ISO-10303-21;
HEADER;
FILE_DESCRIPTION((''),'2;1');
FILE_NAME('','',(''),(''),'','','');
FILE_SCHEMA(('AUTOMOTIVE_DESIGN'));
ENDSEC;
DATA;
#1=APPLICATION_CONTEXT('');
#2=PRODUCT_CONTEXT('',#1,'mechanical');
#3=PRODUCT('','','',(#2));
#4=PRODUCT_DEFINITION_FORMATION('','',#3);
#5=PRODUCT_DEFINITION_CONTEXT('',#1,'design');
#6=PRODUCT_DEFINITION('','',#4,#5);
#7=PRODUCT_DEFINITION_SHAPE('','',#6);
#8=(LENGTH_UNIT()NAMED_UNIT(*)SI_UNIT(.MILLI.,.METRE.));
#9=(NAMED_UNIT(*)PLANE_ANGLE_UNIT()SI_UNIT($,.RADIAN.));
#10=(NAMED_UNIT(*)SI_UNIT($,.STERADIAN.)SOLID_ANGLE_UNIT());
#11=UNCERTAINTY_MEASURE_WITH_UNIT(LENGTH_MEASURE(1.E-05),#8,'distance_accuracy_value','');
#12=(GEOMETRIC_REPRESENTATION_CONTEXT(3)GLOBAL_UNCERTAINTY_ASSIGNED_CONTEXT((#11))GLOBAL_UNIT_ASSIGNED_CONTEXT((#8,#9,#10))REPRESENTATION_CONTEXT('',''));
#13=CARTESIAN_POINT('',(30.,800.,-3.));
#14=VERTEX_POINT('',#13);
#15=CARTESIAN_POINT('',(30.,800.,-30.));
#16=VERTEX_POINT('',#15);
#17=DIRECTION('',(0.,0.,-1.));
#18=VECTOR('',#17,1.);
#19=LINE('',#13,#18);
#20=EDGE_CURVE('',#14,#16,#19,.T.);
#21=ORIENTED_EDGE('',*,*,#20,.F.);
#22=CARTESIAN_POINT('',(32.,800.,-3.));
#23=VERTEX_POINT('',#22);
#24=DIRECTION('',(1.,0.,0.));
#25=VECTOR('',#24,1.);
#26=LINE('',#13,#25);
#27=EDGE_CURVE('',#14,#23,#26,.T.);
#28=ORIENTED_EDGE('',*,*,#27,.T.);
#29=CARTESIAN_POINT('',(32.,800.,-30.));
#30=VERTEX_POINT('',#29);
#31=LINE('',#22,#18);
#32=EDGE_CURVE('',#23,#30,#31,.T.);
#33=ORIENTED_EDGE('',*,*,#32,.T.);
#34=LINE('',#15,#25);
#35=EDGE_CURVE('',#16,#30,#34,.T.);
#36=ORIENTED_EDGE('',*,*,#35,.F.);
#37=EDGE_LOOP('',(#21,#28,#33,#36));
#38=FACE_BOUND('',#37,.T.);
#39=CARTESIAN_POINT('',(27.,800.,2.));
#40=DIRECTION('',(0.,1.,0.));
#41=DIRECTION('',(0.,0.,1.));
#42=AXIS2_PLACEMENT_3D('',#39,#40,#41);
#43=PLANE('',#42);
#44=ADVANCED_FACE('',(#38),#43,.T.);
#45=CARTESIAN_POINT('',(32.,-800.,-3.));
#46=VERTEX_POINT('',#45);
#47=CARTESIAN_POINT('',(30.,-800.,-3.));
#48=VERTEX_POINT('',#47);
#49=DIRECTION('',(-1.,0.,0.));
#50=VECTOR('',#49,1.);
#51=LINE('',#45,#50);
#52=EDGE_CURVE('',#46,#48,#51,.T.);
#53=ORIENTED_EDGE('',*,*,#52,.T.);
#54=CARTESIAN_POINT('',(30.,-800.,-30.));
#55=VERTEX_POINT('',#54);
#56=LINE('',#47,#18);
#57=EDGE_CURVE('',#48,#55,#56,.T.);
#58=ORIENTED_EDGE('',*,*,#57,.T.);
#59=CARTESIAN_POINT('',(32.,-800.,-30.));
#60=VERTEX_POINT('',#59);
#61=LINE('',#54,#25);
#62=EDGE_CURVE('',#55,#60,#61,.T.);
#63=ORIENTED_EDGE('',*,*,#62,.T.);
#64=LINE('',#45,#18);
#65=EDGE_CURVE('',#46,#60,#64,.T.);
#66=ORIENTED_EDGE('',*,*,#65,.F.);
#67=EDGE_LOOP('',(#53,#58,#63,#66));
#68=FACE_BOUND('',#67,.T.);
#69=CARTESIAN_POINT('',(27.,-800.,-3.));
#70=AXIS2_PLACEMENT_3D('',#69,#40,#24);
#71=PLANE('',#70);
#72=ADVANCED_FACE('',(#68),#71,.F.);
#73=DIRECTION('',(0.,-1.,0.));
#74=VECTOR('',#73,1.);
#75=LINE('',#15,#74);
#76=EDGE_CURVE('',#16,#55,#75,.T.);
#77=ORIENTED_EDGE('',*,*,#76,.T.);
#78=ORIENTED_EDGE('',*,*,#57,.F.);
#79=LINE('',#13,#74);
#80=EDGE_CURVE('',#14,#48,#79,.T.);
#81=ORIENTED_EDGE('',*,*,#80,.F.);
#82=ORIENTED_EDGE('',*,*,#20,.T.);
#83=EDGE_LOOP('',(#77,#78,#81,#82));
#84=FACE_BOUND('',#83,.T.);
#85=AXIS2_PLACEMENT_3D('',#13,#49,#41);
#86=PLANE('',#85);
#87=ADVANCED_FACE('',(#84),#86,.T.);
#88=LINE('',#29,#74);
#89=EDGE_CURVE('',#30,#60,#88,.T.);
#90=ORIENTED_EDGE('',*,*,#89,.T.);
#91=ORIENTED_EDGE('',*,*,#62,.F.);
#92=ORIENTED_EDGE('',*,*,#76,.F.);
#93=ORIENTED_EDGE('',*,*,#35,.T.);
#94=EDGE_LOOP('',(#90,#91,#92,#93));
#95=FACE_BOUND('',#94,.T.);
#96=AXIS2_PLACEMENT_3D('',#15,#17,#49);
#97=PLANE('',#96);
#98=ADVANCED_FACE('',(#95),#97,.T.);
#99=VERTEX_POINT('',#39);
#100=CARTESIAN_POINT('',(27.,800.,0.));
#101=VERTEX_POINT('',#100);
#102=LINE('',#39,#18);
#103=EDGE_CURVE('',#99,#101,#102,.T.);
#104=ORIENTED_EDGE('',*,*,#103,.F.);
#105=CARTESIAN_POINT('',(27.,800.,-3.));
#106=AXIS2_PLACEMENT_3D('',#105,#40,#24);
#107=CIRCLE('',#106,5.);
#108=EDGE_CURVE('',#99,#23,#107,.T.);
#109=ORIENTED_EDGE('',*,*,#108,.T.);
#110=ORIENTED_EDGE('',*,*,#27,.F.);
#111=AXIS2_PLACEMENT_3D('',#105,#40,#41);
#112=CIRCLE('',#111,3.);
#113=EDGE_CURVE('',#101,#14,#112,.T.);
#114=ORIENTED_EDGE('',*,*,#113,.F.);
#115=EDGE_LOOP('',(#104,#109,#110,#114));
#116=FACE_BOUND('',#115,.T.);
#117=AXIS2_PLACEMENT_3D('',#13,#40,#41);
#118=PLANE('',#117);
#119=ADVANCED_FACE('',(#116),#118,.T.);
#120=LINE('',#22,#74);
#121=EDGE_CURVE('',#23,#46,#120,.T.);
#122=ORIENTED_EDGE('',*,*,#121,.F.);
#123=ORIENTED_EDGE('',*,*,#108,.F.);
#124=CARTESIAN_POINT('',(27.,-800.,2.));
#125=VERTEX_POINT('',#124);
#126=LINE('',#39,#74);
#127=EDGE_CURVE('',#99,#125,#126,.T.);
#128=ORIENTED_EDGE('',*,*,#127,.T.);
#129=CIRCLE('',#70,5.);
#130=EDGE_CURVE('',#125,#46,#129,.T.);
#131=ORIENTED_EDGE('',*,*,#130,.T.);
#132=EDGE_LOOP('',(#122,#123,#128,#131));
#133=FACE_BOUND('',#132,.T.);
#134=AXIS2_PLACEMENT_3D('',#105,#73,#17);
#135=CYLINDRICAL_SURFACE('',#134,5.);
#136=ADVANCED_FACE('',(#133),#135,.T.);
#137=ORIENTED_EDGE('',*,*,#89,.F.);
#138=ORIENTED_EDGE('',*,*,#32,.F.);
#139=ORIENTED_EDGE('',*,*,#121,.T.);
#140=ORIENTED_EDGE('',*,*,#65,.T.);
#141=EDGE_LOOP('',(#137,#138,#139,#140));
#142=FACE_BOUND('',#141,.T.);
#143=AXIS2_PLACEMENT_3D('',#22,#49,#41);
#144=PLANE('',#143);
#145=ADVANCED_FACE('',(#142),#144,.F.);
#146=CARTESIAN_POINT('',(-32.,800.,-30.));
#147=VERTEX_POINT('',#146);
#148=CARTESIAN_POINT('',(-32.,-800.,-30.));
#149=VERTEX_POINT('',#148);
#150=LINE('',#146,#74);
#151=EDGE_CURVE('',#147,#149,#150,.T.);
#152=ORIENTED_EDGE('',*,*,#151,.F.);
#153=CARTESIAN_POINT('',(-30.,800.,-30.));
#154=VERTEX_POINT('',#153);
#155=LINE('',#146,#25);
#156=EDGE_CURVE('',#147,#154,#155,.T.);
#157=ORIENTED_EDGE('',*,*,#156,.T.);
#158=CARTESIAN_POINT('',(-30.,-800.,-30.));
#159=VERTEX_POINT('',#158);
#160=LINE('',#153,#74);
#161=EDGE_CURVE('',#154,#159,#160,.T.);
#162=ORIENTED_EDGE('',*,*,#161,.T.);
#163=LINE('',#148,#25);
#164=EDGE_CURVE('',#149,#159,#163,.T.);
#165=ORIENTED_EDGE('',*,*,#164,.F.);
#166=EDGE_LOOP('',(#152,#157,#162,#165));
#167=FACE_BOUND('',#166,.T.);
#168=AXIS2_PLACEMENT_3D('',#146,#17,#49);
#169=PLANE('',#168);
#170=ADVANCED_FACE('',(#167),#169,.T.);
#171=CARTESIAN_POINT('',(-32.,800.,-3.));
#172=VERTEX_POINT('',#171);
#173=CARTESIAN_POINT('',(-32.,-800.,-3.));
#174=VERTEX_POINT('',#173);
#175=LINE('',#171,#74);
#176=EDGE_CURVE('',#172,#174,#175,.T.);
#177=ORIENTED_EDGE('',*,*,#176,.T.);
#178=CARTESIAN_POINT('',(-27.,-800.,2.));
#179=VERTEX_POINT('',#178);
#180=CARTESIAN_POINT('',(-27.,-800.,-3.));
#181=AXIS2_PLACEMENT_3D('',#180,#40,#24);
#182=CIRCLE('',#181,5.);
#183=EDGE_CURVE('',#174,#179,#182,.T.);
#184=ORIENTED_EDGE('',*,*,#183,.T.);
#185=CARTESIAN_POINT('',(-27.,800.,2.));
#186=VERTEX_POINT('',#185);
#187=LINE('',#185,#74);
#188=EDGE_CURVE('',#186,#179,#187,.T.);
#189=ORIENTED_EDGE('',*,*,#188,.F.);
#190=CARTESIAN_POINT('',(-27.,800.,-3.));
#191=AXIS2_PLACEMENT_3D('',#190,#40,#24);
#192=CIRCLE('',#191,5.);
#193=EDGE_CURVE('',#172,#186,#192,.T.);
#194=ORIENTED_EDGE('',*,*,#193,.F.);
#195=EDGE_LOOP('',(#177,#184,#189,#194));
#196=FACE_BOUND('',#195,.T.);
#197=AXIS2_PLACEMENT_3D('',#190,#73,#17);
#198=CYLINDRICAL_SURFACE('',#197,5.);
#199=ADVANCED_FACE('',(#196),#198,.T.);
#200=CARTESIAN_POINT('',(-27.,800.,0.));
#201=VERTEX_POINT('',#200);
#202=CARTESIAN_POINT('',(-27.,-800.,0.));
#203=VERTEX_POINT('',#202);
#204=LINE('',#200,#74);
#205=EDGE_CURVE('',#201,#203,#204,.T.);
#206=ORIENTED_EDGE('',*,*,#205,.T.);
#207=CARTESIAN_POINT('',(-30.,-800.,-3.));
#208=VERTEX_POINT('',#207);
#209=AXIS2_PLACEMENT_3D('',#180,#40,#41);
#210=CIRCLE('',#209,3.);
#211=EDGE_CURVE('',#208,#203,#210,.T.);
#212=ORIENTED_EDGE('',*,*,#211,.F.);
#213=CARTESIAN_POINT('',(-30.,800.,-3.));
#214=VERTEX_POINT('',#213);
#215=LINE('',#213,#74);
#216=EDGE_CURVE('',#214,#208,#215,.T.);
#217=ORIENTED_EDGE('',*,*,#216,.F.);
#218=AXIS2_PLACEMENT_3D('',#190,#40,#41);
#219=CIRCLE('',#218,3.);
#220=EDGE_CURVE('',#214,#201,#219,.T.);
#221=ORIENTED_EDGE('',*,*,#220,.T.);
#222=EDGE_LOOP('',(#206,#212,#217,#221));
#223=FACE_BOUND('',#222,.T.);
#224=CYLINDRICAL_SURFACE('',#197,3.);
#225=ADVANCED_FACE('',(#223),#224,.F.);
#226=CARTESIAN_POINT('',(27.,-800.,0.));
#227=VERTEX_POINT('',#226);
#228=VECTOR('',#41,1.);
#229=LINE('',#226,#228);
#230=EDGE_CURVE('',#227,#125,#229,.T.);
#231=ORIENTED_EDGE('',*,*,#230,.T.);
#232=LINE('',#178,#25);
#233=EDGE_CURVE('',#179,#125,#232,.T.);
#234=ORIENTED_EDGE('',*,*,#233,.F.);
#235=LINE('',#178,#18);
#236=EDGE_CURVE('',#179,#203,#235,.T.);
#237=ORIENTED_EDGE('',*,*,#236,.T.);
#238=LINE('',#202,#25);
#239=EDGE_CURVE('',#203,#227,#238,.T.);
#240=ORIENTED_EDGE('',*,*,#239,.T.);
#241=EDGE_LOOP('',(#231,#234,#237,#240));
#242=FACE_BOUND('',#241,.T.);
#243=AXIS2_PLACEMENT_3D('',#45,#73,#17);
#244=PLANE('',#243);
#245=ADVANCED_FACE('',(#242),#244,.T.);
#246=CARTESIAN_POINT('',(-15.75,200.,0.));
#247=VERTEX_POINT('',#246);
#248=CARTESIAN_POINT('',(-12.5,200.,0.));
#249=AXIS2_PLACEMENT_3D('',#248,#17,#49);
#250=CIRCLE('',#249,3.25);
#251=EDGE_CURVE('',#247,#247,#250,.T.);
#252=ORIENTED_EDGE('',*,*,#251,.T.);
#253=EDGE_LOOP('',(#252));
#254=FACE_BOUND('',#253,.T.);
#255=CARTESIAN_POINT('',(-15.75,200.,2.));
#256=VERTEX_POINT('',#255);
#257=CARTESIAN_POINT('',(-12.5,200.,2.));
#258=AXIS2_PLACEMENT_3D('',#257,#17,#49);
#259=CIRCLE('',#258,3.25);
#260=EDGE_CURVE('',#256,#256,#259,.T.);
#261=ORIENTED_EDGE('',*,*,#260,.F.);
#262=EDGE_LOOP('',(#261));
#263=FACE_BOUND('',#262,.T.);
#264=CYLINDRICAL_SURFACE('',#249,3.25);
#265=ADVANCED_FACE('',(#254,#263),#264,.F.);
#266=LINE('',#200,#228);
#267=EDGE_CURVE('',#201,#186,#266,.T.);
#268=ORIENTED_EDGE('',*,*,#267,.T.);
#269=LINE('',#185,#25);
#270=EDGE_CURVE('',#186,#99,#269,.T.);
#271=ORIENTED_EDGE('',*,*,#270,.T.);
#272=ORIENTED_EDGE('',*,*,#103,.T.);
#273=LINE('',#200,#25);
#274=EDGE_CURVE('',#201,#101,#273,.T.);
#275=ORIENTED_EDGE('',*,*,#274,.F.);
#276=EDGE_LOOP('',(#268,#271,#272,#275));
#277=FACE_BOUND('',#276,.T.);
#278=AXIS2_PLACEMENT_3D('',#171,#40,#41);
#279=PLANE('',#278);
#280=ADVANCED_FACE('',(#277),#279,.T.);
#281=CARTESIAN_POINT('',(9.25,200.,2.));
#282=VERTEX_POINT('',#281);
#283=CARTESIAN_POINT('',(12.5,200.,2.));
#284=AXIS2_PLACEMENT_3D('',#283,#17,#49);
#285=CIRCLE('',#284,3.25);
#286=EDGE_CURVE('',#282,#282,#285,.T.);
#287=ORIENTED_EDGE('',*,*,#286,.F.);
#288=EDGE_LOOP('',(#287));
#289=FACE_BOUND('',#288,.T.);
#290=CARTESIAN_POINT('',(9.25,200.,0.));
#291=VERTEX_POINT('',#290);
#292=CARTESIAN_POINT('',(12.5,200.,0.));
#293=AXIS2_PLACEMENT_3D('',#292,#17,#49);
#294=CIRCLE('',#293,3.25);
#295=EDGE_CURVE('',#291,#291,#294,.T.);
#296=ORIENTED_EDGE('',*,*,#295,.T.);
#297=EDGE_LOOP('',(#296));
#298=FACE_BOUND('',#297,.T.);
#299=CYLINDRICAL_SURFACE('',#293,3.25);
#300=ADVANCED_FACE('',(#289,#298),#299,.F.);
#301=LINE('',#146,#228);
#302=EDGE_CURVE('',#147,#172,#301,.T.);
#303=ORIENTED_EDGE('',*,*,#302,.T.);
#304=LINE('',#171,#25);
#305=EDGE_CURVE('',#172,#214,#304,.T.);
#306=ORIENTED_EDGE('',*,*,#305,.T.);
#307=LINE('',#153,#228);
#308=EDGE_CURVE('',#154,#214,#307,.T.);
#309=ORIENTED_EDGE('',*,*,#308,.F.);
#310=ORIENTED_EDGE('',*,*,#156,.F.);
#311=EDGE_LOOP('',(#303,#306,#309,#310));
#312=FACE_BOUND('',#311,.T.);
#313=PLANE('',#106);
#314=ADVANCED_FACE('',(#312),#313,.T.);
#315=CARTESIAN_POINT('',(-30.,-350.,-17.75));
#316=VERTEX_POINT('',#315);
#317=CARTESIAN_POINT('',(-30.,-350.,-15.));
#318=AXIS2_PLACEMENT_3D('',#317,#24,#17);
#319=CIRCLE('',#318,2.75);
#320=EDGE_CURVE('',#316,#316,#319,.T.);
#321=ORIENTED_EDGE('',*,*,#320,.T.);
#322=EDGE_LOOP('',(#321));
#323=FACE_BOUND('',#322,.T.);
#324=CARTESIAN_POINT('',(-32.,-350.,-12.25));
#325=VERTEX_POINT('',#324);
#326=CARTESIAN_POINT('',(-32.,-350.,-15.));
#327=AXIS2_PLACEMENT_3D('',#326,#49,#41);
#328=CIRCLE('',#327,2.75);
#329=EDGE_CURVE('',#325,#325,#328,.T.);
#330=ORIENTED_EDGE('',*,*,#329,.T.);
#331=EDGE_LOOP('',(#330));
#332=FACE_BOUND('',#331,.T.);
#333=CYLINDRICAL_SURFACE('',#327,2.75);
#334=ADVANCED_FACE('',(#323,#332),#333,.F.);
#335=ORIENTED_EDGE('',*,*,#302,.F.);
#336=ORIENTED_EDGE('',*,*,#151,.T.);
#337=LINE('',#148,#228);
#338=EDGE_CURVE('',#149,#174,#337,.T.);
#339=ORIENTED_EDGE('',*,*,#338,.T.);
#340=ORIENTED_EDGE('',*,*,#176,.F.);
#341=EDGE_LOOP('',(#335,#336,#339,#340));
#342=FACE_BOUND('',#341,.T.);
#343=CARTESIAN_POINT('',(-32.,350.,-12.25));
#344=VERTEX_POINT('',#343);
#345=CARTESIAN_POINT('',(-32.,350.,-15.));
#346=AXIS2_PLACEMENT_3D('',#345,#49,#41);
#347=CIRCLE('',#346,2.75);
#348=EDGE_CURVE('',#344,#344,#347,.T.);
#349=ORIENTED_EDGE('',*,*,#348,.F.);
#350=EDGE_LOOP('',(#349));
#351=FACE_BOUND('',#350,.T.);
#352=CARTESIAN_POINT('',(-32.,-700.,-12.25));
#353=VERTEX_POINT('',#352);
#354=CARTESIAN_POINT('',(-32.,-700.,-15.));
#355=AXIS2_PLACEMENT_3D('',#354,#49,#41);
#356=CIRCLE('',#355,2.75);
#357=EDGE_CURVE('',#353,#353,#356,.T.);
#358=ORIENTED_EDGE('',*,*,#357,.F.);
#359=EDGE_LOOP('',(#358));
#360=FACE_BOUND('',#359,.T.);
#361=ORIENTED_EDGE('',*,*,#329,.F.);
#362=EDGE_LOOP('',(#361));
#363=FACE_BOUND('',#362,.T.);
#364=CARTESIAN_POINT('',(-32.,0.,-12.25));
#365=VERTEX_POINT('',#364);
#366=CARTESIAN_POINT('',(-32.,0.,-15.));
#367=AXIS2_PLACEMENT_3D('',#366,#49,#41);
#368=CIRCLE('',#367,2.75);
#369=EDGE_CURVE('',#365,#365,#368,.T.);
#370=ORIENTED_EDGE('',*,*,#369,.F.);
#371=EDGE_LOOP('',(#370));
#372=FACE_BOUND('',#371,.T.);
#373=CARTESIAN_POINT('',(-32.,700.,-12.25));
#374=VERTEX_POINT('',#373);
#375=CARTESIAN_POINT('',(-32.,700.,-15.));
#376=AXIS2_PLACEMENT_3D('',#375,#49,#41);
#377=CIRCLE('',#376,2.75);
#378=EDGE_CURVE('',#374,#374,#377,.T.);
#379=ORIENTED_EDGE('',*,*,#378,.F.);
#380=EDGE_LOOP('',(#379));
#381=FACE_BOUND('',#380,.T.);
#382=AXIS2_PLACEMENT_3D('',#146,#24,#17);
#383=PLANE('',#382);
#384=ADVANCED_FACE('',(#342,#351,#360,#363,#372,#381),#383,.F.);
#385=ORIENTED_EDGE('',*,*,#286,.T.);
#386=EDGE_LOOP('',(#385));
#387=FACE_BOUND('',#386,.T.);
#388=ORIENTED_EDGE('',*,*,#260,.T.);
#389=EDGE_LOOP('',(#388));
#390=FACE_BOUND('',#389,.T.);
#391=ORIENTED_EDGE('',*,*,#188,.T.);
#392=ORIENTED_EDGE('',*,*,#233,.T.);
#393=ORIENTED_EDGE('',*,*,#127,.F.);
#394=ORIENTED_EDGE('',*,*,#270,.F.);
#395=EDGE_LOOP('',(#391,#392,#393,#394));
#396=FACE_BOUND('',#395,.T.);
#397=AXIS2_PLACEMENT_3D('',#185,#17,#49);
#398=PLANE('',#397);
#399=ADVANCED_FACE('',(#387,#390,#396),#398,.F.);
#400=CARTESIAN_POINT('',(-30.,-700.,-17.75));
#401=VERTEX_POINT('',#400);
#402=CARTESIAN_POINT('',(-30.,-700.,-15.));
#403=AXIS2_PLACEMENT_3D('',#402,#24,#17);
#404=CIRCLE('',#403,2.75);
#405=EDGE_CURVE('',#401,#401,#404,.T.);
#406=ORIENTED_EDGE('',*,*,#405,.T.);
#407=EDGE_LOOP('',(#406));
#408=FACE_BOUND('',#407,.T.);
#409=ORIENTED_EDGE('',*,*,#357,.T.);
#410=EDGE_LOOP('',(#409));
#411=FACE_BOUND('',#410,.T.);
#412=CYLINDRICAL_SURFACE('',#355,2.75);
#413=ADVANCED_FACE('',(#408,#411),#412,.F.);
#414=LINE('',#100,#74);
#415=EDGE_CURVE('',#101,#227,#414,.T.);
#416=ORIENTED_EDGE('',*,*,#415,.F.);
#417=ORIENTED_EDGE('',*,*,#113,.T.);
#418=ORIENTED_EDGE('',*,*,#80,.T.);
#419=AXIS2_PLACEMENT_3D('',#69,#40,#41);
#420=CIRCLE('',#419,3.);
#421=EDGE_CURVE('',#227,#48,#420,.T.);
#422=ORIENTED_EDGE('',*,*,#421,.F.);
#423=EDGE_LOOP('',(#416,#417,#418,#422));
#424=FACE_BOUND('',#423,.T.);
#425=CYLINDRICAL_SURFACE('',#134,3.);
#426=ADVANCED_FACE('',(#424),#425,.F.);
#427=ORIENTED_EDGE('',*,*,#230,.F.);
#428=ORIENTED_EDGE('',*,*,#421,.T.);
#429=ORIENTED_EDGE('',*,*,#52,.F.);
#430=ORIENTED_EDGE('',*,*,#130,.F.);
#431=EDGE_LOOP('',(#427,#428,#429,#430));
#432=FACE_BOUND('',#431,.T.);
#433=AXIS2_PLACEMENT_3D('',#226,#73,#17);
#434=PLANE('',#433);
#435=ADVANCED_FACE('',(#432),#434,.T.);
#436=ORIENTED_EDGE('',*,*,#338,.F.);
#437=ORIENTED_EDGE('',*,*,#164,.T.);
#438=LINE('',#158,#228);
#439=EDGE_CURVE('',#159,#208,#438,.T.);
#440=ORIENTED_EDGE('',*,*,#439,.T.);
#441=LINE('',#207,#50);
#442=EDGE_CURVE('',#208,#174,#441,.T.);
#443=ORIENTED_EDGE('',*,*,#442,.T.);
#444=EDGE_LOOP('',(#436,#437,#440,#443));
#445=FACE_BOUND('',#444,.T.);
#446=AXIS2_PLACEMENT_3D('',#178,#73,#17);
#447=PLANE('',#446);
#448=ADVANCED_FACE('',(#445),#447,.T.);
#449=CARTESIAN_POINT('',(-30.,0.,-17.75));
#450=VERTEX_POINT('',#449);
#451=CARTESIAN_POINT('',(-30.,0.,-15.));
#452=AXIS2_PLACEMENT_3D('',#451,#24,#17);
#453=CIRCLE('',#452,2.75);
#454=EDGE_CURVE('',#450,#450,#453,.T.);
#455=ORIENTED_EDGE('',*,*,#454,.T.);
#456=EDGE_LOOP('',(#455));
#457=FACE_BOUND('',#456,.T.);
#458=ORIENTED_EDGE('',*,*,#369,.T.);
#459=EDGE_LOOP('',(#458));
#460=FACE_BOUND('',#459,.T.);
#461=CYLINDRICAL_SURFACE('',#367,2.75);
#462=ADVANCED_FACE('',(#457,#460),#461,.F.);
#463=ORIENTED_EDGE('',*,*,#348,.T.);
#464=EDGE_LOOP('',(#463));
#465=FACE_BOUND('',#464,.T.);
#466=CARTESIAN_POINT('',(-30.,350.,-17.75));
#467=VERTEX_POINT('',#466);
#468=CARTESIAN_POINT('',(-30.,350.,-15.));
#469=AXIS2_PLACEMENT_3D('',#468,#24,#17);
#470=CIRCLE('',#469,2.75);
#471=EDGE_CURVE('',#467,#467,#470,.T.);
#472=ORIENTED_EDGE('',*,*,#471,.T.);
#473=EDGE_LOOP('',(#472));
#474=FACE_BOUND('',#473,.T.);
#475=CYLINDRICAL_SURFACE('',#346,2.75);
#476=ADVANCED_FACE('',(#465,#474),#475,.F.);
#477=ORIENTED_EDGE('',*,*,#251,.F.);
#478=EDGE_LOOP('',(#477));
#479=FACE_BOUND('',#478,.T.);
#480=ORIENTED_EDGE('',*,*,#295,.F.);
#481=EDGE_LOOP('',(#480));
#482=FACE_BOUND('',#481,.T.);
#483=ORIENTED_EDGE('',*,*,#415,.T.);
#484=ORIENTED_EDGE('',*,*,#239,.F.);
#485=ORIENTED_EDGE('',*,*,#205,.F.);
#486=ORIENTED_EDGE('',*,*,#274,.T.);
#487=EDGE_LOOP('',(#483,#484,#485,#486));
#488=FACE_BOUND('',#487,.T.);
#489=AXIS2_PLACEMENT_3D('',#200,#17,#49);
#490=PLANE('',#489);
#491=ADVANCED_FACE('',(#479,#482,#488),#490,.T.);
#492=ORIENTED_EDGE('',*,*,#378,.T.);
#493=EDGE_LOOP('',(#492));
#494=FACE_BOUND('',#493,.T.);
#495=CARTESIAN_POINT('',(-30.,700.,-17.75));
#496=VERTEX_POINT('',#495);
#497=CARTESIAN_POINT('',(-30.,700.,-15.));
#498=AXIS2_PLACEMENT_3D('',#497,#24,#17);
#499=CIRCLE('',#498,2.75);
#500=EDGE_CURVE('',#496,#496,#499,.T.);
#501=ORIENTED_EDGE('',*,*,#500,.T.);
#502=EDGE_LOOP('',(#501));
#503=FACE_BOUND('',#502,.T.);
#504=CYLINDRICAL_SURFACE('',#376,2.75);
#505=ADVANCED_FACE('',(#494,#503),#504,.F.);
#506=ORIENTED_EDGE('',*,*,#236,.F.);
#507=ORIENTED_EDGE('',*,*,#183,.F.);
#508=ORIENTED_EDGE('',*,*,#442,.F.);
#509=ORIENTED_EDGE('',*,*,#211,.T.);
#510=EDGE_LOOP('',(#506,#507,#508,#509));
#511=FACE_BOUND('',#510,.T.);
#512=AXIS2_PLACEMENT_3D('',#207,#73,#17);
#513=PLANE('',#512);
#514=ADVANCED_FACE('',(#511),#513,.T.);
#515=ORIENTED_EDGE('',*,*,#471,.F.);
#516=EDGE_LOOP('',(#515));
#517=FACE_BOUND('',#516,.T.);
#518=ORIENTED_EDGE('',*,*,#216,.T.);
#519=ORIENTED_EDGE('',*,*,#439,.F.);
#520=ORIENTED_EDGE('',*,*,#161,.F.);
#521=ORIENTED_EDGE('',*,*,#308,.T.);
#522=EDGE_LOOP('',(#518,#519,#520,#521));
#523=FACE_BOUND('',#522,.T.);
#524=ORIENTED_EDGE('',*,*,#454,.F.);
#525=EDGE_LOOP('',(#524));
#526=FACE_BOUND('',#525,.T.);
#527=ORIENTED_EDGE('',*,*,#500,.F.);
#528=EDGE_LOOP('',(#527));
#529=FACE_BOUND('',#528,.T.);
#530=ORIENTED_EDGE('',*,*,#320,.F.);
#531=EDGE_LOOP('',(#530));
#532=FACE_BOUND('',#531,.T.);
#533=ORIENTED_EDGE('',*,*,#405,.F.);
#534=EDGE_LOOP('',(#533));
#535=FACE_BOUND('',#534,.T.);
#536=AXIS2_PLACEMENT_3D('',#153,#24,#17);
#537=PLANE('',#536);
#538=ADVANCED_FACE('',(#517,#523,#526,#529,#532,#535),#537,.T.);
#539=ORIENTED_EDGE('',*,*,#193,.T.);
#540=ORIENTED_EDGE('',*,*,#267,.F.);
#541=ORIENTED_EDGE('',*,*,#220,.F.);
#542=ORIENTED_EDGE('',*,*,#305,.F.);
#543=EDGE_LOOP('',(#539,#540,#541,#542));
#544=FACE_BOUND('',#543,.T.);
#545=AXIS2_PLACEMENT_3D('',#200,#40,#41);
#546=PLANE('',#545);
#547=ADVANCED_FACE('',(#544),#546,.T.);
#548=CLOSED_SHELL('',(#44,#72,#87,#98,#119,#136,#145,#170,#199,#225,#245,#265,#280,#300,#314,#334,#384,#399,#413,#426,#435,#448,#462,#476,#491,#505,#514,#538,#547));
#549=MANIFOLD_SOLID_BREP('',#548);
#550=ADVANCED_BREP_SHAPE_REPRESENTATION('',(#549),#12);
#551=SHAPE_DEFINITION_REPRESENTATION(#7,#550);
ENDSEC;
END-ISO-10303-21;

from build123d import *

# Parameters (mm, degrees)
SM_BASE_FLANGE_1_DEPTH      = 800
HOLE_WIZARD_5_5_5_5_1_D     = 5.5
HOLE_WIZARD_5_5_5_5_1_DEPTH = 2
HOLE_WIZARD_6_5_6_5_1_D     = 6.5


# Sheet-metal steps are written as plain solids
with BuildPart() as part:
    # Sketch 1 → 基体-法兰1 (new, symmetric)
    with BuildSketch(Plane(origin=(0, 0, 0), x_dir=(1, 0, 0), z_dir=(0, 1, 0))):
        with BuildLine():
            Line((-30, 30), (-30, 3))
            ThreePointArc((-30, 3), (-29.121320344, 0.878679656), (-27, 0))
            Line((-27, 0), (27, 0))
            ThreePointArc((27, 0), (29.121320344, 0.878679656), (30, 3))
            Line((30, 3), (30, 30))
            Line((30, 30), (32, 30))
            Line((32, 30), (32, 3))
            ThreePointArc((32, 3), (30.535533906, -0.535533906), (27, -2))
            Line((27, -2), (-27, -2))
            ThreePointArc((-27, -2), (-30.535533906, -0.535533906), (-32, 3))
            Line((-32, 3), (-32, 30))
            Line((-32, 30), (-30, 30))
        make_face()
    extrude(amount=SM_BASE_FLANGE_1_DEPTH, both=True)

    # Ø5.5 (5.5) 直径孔1
    with Locations(Plane(origin=(-32, 700, -15), x_dir=(0, 0, -1), z_dir=(-1, 0, 0))):
        with Locations((0, 0), (0, 350), (0, 700), (0, 1050), (0, 1400)):
            Hole(HOLE_WIZARD_5_5_5_5_1_D / 2, depth=HOLE_WIZARD_5_5_5_5_1_DEPTH)

    # Ø6.5 (6.5) 直径孔1 (through all)
    with Locations(Plane(origin=(-12.5, 200, 0), x_dir=(-1, 0, 0), z_dir=(0, 0, -1))):
        with Locations((0, 0), (-25, 0)):
            Hole(HOLE_WIZARD_6_5_6_5_1_D / 2)


solid = part.part
